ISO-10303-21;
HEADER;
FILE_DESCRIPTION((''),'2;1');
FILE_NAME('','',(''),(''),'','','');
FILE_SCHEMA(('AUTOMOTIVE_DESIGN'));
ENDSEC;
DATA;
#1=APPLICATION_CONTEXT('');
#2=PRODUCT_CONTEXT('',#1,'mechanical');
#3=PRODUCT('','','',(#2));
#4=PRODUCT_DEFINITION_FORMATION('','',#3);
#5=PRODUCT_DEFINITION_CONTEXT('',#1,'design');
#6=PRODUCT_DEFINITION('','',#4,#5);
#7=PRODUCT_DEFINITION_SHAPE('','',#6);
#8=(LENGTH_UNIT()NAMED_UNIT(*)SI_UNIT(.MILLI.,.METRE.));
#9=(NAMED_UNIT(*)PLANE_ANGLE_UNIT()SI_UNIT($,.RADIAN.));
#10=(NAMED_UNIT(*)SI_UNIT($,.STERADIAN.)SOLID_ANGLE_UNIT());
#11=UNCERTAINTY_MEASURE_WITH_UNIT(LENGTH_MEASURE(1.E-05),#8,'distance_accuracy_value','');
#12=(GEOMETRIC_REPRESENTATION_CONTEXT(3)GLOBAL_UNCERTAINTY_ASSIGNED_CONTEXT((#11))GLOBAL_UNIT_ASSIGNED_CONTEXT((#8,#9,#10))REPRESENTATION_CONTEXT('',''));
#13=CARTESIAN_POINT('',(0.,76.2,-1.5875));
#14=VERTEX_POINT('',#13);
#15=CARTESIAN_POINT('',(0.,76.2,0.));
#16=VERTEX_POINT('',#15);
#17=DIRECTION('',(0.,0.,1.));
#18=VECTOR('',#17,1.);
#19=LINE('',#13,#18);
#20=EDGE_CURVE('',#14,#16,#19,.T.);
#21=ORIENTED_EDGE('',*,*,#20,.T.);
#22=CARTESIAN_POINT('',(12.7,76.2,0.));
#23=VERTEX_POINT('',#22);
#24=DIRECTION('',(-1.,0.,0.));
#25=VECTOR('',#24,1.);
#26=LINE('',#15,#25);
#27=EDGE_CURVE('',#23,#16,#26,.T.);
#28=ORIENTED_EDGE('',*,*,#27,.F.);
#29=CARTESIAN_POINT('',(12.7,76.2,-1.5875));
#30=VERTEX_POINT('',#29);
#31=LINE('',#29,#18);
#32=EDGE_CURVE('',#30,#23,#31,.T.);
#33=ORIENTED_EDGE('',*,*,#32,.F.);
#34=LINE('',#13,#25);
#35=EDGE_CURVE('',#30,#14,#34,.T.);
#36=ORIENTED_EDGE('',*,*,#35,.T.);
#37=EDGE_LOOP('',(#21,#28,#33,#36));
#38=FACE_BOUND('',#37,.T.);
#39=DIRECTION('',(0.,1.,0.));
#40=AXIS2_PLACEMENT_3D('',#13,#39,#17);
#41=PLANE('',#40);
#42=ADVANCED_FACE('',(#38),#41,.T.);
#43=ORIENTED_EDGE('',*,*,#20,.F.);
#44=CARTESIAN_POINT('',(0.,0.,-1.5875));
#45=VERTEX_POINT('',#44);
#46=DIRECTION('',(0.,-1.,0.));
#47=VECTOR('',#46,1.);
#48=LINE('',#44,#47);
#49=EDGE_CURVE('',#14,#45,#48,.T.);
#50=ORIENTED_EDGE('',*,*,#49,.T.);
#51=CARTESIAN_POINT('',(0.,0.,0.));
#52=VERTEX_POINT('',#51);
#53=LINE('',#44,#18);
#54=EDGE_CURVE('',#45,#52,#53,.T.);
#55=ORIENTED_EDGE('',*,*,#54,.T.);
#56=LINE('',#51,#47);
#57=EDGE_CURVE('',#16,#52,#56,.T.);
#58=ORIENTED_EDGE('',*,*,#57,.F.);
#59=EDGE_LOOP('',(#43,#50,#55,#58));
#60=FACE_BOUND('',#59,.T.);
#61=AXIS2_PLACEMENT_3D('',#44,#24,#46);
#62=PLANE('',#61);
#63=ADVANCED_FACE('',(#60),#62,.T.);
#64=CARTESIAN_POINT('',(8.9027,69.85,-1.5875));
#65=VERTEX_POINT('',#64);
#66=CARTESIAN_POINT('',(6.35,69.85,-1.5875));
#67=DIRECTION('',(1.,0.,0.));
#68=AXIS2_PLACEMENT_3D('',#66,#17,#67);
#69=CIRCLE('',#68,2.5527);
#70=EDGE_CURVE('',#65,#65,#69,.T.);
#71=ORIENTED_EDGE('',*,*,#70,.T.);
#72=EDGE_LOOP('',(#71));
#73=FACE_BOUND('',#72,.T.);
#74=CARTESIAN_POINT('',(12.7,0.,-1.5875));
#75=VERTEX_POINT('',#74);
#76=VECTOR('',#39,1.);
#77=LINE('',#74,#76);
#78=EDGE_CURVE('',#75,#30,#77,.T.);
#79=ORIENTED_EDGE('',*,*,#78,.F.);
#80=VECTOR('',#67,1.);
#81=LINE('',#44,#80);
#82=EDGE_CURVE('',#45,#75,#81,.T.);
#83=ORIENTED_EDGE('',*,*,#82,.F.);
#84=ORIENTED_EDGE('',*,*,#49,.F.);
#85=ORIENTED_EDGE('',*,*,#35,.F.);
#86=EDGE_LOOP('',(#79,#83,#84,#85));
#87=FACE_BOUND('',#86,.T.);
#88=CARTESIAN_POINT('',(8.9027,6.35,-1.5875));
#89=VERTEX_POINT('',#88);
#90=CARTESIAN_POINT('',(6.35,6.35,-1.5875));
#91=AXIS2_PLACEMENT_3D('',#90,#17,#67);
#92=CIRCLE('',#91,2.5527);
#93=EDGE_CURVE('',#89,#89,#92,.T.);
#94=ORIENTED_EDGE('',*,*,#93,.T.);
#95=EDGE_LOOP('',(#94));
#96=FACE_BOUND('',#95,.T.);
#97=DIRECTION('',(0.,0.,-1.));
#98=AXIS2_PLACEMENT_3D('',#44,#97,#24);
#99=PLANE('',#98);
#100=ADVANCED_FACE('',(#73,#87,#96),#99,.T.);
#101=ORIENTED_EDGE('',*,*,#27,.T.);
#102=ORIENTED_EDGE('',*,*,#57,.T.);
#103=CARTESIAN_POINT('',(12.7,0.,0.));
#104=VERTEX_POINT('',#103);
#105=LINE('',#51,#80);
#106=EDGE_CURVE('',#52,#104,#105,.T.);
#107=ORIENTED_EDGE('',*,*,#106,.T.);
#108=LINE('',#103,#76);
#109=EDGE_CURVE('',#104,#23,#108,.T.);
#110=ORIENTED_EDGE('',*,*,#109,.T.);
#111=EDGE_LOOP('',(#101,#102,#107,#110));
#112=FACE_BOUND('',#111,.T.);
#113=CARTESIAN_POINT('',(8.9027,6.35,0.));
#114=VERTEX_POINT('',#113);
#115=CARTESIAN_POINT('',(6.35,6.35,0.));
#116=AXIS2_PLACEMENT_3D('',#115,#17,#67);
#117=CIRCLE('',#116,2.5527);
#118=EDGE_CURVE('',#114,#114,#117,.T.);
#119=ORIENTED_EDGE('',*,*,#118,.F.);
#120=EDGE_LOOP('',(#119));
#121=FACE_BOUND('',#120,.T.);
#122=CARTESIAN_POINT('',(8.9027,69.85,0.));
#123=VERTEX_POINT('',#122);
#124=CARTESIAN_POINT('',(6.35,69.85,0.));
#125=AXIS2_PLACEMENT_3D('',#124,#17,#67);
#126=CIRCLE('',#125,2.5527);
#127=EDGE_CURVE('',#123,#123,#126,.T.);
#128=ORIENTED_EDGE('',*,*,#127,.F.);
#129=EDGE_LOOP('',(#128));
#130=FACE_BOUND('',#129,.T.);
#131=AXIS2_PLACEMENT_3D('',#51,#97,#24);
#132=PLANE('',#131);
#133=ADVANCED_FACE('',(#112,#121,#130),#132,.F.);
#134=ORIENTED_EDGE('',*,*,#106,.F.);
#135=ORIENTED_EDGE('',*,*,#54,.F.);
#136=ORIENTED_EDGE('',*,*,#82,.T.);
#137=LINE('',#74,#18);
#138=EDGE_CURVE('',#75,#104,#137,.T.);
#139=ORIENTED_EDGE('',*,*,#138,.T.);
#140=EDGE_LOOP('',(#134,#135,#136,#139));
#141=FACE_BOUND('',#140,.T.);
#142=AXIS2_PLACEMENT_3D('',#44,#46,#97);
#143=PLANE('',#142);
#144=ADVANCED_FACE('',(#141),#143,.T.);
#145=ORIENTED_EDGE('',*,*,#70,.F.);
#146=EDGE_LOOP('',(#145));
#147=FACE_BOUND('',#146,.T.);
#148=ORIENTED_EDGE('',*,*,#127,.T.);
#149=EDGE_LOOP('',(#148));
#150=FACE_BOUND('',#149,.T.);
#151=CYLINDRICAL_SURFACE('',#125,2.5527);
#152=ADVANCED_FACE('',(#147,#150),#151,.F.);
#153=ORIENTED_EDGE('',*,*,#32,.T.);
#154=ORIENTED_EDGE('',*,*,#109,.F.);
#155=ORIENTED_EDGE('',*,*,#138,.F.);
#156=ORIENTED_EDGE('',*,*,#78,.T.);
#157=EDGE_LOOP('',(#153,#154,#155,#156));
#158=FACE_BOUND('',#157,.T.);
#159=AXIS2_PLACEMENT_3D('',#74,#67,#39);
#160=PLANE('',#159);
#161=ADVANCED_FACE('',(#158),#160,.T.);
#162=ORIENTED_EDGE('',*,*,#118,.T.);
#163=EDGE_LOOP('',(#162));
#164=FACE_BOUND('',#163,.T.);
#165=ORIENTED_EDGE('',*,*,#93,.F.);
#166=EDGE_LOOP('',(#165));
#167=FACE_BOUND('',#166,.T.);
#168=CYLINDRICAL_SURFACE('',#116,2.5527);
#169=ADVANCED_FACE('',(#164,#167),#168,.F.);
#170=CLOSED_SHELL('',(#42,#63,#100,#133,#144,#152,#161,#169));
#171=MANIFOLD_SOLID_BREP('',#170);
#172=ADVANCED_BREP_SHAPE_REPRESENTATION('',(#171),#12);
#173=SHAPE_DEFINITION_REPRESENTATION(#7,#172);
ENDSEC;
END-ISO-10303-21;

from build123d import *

# Parameters (mm, degrees)
SKETCH1_W              = 12.7
SKETCH1_H              = 76.2
BASE_FLANGE1_DEPTH     = 1.5875
F_10_CLEARANCE_HOLE1_D = 5.1054


# Sheet-metal steps are written as plain solids
with BuildPart() as part:
    # Sketch1 → Base-Flange1 (new body)
    with BuildSketch(Plane.XY):
        with Locations((6.35, 38.1)):
            Rectangle(SKETCH1_W, SKETCH1_H)
    extrude(amount=-BASE_FLANGE1_DEPTH)

    # #10 Clearance Hole1 (through all)
    with Locations(Plane.XY):
        with Locations((6.35, 69.85), (6.35, 6.35)):
            Hole(F_10_CLEARANCE_HOLE1_D / 2)


solid = part.part
